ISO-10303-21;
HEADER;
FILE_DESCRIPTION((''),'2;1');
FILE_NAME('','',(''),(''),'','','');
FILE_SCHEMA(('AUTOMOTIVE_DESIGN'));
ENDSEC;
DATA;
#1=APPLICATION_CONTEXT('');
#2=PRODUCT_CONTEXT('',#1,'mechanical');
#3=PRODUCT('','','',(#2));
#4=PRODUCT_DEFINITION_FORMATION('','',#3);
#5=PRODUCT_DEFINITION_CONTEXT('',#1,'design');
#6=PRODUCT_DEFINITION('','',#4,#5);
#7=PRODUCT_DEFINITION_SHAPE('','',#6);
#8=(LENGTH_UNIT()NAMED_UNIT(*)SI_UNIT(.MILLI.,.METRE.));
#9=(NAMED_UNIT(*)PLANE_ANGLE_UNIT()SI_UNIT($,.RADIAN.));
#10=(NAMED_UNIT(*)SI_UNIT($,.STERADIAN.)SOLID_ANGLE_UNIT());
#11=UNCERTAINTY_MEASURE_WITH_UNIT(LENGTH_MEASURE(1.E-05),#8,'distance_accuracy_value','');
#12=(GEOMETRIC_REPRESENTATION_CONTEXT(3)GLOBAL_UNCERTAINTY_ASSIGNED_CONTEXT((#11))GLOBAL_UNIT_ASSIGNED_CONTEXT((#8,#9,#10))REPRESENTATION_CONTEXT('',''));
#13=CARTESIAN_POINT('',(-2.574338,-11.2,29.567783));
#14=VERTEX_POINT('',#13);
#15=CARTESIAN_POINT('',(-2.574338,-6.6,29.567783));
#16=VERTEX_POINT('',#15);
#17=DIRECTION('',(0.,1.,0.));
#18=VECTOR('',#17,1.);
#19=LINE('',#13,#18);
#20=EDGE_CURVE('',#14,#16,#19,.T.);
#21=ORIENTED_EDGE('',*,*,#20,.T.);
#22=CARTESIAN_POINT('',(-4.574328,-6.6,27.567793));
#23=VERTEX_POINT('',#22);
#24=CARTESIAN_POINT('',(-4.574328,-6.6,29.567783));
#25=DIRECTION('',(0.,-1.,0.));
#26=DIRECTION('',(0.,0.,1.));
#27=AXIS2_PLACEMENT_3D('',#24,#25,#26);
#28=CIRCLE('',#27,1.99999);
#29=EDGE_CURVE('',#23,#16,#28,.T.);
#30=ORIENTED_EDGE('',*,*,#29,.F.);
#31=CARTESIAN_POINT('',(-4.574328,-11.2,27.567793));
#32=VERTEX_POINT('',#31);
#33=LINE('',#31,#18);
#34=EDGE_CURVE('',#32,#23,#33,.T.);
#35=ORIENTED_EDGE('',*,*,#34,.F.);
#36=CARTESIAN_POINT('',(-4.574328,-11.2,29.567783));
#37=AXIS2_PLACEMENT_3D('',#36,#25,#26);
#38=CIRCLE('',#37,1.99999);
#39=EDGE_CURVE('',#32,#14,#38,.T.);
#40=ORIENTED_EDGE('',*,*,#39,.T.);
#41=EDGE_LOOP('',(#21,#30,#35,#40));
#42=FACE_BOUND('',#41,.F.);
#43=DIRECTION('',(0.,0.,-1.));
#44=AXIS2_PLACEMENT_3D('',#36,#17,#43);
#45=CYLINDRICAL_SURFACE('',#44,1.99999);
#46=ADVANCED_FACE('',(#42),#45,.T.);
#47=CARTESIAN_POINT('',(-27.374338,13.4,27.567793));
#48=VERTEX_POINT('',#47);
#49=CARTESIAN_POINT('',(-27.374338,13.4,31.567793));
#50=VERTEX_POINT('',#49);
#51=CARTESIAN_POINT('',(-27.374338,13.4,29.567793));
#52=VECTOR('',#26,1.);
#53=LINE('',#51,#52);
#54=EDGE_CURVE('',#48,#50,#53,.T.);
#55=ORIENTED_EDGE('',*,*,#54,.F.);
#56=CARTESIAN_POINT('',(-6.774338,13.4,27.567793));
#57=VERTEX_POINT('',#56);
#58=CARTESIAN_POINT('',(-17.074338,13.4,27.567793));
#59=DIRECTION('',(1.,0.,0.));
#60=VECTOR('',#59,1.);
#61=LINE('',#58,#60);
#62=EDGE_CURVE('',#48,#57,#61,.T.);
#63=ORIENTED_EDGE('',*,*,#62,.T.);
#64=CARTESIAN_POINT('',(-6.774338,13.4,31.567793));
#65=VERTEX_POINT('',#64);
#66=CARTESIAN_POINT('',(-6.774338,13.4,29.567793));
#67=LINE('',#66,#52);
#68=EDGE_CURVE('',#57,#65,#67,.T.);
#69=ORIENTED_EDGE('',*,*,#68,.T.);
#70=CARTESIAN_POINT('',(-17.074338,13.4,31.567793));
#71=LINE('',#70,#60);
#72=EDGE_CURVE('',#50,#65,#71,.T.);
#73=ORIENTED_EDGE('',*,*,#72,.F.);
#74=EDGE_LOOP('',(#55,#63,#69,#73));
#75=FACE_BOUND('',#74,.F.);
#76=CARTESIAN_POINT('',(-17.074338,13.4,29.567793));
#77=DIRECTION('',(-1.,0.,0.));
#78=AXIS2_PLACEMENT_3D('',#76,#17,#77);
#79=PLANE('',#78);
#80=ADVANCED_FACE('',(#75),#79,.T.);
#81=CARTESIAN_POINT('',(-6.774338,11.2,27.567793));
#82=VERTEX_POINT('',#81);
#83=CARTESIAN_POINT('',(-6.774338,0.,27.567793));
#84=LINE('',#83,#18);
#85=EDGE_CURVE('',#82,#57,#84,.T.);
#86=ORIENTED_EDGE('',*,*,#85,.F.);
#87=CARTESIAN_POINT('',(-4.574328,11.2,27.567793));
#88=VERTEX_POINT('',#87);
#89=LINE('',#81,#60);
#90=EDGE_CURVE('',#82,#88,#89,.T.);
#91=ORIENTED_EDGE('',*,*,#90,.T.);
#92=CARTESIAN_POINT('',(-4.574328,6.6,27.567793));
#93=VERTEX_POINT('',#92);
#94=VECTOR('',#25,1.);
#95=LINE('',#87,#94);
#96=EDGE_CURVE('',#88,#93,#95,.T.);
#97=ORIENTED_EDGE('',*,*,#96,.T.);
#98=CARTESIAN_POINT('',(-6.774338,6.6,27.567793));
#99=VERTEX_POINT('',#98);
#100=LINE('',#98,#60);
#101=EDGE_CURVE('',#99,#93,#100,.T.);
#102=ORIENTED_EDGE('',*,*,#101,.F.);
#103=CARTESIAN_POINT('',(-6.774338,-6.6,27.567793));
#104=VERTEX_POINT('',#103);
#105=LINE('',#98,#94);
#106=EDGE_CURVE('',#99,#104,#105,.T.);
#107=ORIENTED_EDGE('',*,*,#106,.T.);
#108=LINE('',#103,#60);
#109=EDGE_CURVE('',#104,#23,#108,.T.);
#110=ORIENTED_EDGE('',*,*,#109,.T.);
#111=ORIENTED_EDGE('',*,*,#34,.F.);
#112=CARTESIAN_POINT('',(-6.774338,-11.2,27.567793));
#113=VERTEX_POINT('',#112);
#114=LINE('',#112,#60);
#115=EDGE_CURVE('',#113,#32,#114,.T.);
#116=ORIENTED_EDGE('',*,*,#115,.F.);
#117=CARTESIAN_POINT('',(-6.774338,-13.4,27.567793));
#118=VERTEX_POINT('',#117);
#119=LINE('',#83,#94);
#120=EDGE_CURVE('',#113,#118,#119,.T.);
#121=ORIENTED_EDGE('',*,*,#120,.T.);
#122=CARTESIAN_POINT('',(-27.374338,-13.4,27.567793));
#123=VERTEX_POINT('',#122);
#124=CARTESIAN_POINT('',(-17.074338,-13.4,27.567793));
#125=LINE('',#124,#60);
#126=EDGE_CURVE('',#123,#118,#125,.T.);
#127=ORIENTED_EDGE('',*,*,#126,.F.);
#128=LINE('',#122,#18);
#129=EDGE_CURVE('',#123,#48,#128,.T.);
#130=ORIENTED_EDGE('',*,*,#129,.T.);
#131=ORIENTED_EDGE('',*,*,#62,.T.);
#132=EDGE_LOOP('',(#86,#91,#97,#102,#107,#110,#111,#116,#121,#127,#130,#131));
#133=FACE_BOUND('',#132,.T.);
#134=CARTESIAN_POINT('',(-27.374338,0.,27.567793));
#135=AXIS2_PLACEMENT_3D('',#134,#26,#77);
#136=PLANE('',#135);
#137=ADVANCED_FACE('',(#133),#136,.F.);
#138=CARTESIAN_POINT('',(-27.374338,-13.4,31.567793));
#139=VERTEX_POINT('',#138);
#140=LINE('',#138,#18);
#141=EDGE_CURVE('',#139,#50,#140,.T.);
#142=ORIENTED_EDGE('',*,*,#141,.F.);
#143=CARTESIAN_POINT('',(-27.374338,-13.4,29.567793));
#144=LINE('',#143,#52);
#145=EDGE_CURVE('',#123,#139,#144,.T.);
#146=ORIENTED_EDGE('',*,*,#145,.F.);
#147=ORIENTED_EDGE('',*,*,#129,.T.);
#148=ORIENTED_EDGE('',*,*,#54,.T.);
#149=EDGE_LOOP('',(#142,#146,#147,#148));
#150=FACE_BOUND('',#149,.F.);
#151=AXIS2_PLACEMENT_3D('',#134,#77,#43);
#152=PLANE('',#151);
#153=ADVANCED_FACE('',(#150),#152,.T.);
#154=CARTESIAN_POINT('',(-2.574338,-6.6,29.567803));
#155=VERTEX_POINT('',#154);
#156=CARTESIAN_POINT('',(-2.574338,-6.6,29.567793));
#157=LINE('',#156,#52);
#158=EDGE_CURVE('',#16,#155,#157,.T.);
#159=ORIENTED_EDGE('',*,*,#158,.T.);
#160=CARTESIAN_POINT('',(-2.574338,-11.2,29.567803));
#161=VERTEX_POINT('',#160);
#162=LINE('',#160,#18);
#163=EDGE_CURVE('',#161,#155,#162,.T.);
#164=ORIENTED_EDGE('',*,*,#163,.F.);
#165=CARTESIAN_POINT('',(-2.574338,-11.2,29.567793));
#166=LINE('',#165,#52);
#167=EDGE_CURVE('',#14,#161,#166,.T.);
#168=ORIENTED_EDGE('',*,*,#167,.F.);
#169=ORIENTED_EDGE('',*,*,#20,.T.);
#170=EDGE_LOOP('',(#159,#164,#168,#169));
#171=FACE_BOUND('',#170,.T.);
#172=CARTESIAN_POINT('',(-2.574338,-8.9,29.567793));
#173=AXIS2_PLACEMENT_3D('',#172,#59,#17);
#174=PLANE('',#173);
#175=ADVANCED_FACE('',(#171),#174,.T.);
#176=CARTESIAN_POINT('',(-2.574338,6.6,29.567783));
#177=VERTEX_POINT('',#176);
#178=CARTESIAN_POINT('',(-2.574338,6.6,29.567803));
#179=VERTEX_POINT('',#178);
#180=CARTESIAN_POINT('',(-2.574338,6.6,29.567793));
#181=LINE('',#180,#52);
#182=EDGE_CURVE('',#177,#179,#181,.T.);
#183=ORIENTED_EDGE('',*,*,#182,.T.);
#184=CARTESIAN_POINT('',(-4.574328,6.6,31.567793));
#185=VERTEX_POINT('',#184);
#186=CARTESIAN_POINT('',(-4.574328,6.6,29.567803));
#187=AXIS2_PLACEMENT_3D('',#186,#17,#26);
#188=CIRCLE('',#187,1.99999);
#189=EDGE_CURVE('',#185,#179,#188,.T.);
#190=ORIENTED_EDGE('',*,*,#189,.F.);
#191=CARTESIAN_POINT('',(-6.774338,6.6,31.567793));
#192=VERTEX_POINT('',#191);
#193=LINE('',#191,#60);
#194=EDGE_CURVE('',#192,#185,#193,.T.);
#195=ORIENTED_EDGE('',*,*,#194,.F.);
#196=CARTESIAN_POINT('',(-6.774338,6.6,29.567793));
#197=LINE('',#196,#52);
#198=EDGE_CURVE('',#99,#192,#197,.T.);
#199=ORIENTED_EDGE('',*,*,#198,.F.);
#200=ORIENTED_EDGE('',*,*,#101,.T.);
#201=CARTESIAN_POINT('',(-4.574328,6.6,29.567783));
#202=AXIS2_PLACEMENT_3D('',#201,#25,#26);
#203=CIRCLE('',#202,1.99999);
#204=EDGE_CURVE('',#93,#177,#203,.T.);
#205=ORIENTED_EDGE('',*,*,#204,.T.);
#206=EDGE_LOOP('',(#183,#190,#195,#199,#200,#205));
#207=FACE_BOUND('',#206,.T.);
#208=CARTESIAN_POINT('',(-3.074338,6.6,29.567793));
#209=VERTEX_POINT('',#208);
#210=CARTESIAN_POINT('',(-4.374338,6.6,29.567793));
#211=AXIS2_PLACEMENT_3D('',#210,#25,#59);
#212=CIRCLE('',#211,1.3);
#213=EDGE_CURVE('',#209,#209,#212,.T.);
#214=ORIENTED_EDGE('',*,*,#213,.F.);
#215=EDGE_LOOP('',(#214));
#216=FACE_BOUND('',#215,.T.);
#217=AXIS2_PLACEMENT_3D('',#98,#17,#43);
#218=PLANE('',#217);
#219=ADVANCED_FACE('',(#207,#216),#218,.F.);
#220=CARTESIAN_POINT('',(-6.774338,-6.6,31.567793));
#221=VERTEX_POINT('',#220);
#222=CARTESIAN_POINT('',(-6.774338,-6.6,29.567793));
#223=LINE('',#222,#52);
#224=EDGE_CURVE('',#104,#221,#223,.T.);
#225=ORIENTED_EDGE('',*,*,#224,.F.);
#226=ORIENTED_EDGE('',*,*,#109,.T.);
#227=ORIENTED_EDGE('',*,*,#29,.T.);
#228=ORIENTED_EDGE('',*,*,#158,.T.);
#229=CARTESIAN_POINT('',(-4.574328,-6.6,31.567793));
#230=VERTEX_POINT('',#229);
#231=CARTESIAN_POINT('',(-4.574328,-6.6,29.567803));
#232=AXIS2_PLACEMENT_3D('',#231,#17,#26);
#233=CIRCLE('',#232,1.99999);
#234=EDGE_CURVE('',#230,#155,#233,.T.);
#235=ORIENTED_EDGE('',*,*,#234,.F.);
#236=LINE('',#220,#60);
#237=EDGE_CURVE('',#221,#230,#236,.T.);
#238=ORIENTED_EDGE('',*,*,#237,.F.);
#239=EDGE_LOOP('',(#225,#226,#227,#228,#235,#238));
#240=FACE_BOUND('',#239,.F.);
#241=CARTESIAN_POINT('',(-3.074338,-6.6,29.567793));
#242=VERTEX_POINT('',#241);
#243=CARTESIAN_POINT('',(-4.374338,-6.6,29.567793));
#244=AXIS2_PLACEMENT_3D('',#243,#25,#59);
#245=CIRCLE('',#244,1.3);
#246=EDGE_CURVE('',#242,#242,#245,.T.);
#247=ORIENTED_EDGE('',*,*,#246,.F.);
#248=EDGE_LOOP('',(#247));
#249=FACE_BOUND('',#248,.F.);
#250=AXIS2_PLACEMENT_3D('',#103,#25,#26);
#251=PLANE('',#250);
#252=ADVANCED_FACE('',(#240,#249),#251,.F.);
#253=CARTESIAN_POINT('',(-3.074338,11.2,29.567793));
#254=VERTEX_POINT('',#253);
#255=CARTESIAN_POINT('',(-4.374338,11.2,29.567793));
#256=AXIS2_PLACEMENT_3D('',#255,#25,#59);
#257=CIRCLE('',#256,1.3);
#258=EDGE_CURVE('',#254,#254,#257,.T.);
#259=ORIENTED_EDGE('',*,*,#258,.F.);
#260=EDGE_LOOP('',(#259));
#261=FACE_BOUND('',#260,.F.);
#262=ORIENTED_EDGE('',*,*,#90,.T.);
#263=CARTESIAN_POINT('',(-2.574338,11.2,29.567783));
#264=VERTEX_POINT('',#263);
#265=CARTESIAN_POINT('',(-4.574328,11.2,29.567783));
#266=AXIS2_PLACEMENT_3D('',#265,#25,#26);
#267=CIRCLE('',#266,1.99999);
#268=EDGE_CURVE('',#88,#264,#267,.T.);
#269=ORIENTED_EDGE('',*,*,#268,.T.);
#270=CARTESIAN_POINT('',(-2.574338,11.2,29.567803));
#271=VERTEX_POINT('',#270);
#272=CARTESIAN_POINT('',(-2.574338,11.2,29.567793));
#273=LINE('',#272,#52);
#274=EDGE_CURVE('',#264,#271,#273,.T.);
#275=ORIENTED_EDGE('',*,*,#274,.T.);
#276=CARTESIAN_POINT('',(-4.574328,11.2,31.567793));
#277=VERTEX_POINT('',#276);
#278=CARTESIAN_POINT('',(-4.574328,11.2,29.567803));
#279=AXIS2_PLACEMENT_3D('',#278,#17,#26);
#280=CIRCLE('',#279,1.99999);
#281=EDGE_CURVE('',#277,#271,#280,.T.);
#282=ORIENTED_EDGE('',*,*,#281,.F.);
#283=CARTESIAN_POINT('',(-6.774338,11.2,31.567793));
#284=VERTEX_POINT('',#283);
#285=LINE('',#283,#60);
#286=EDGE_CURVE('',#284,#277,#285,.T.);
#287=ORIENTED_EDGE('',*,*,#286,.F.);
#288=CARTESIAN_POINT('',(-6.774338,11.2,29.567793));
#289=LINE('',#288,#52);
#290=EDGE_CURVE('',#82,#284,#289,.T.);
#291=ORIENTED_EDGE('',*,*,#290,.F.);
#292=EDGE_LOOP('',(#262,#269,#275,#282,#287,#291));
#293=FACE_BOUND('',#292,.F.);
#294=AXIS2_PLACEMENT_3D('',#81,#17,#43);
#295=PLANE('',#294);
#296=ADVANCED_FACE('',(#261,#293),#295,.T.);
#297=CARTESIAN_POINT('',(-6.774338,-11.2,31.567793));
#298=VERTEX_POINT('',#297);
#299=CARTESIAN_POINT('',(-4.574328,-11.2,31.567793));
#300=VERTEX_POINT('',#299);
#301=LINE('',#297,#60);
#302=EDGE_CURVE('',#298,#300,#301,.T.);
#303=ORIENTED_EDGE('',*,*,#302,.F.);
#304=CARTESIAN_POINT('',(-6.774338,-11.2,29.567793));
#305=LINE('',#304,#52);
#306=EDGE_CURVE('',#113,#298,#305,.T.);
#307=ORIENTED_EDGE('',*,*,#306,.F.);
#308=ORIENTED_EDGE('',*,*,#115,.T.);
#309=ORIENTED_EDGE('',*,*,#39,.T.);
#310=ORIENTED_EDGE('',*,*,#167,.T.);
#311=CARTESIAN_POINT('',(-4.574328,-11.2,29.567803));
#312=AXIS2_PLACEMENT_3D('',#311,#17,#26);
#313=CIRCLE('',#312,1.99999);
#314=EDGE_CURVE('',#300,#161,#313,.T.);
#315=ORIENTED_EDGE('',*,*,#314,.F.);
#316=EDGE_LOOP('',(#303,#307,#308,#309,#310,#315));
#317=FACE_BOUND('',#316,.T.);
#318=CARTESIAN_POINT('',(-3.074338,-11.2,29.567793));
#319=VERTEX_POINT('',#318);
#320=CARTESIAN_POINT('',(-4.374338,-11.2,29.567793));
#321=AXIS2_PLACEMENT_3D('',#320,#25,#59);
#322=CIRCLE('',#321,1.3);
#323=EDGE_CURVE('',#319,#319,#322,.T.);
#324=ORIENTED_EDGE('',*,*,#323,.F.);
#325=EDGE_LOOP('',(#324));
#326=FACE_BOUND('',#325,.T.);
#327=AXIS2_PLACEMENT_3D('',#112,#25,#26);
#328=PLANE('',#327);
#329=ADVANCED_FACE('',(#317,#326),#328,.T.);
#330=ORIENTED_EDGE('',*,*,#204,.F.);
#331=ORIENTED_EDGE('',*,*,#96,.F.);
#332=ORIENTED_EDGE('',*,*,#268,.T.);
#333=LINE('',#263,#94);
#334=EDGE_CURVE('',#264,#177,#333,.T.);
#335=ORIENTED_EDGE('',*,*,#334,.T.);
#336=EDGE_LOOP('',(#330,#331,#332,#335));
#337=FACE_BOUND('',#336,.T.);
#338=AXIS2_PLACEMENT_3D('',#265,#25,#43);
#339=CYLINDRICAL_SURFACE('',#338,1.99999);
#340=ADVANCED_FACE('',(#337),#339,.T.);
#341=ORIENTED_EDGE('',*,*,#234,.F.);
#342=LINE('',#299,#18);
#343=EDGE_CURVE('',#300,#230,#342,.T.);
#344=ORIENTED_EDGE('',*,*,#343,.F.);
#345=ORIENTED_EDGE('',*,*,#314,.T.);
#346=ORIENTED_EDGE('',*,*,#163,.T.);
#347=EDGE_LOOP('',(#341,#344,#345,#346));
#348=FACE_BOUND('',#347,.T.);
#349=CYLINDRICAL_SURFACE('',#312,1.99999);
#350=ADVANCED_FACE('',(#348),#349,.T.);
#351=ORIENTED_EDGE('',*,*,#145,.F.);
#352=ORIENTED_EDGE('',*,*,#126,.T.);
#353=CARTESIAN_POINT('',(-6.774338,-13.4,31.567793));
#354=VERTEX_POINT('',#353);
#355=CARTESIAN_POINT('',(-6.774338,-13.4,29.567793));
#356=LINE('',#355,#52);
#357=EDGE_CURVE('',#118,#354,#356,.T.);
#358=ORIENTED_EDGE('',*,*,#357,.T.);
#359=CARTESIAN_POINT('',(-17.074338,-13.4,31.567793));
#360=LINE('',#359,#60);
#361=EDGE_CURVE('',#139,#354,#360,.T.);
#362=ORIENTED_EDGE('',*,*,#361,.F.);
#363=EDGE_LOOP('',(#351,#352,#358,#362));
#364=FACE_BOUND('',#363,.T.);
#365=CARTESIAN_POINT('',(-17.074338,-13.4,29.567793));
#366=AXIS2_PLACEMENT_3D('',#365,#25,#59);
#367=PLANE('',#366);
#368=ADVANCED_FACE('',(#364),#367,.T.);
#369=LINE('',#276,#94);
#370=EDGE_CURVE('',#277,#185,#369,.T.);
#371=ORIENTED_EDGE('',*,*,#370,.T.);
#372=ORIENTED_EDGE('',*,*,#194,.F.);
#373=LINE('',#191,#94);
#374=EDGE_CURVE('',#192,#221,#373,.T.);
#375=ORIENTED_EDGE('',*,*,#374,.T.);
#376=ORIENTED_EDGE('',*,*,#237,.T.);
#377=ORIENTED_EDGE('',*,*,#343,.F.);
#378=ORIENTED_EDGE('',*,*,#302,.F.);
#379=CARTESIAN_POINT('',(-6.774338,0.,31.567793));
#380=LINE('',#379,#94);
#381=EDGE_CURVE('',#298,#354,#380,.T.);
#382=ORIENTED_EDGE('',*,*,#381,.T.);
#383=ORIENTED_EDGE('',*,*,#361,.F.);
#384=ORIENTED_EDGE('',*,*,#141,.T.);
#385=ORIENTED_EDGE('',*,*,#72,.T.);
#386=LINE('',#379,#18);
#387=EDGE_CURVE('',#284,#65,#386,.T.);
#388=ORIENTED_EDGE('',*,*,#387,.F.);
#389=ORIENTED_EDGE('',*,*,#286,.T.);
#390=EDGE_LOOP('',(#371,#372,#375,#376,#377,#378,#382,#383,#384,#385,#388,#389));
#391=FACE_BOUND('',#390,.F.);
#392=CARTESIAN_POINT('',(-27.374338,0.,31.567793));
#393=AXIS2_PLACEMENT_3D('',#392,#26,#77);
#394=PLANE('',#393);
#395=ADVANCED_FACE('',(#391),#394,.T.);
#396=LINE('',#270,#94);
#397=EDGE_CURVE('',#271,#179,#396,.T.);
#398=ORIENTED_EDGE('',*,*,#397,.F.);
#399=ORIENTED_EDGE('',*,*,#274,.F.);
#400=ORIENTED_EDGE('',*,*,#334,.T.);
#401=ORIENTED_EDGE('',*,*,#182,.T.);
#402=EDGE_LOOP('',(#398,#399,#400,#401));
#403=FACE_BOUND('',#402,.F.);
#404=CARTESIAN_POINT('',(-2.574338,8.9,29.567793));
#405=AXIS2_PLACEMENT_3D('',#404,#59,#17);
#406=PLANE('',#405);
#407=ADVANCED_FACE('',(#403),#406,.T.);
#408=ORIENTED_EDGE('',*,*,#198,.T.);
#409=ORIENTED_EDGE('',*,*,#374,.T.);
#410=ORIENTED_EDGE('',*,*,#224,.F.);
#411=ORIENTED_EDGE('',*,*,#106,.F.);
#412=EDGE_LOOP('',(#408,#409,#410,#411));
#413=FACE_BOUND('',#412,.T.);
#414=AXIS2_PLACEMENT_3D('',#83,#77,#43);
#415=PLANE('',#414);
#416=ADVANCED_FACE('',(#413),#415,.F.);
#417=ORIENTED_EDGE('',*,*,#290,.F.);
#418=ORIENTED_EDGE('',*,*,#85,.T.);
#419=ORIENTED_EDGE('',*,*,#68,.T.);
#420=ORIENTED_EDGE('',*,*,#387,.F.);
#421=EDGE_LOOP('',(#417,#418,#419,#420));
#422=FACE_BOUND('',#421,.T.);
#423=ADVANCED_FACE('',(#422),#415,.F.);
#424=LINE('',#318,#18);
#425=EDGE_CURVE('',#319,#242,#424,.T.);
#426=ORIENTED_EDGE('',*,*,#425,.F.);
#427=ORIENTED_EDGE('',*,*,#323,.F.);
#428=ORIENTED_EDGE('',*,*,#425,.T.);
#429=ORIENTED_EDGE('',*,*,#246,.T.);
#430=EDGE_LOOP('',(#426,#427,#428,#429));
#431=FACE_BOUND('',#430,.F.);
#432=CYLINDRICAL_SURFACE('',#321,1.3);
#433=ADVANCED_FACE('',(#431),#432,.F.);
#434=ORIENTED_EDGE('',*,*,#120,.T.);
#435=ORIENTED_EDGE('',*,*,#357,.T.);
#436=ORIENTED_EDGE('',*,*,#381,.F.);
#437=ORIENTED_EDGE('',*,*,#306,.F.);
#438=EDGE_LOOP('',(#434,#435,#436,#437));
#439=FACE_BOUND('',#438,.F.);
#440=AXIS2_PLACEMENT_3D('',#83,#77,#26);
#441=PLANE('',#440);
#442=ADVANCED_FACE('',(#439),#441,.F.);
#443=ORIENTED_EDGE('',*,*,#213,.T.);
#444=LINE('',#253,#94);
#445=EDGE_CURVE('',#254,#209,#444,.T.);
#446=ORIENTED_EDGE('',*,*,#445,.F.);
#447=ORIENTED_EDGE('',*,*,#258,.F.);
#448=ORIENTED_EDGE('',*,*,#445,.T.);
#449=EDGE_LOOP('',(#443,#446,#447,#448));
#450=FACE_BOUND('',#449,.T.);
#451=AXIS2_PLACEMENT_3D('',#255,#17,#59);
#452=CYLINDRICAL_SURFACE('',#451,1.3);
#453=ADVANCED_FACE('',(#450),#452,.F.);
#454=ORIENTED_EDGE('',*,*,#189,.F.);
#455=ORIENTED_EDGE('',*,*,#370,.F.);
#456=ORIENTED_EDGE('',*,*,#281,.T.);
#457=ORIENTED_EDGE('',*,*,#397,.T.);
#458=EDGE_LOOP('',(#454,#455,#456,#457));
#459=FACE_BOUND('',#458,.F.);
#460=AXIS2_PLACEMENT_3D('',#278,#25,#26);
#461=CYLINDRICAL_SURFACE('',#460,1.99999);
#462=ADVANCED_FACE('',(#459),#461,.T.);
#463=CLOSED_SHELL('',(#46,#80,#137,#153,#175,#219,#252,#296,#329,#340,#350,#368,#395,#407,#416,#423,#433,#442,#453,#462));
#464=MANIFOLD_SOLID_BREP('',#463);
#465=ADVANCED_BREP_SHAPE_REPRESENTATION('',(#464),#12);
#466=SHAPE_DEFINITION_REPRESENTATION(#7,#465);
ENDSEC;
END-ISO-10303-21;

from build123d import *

# Parameters (mm, degrees)
F0_W     = 20.6
F0_H     = 4
F1_DEPTH = 13.4
F2_W     = 4.6
F2_H     = 4
F3_DEPTH = 4.2
F4_R     = 1.3
F5_DEPTH = 25
F6_R     = 1.99999


# Not quite as in the source:
# - a fillet or chamfer is up to 0.001 mm smaller than in the source, because OpenCascade refuses the exact size


with BuildPart() as f1:
    # F0 (on Front) → F1 (new body)
    with BuildSketch(Plane.XZ):
        with Locations((-17.0743378759, 29.5677930117)):
            Rectangle(F0_W, F0_H)
    extrude(amount=F1_DEPTH)

    # F2 (on face) → F3 (join)
    with BuildSketch(Plane.YZ.offset(-6.7743378759)):
        with Locations((-8.9, 29.5677930117)):
            Rectangle(F2_W, F2_H)
    extrude(amount=F3_DEPTH)

    # F4 (on face) → F5 (cut)
    with BuildSketch(Plane.XZ.offset(11.2)):
        with Locations((-4.3743378759, 29.5677930117)):
            Circle(F4_R)
    extrude(amount=-F5_DEPTH, mode=Mode.SUBTRACT)

    # F6 (radius 2 in the source; OpenCascade refuses exactly that, so slightly less here)
    f6_edges = [f1.edges().sort_by_distance(p)[0] for p in [
        (-2.574338, -8.9, 31.567793),
        (-2.574338, -8.9, 27.567793),
    ]]
    fillet(f6_edges, radius=F6_R)

    # F7: F1 across face


with BuildPart() as f1_1:
    add(f1.part)
    add(f1.part.mirror(Plane(origin=(-17.0743378759, 0, 29.5677930117), x_dir=(1, 0, 0), z_dir=(0, 1, 0))))


solid = f1_1.part
